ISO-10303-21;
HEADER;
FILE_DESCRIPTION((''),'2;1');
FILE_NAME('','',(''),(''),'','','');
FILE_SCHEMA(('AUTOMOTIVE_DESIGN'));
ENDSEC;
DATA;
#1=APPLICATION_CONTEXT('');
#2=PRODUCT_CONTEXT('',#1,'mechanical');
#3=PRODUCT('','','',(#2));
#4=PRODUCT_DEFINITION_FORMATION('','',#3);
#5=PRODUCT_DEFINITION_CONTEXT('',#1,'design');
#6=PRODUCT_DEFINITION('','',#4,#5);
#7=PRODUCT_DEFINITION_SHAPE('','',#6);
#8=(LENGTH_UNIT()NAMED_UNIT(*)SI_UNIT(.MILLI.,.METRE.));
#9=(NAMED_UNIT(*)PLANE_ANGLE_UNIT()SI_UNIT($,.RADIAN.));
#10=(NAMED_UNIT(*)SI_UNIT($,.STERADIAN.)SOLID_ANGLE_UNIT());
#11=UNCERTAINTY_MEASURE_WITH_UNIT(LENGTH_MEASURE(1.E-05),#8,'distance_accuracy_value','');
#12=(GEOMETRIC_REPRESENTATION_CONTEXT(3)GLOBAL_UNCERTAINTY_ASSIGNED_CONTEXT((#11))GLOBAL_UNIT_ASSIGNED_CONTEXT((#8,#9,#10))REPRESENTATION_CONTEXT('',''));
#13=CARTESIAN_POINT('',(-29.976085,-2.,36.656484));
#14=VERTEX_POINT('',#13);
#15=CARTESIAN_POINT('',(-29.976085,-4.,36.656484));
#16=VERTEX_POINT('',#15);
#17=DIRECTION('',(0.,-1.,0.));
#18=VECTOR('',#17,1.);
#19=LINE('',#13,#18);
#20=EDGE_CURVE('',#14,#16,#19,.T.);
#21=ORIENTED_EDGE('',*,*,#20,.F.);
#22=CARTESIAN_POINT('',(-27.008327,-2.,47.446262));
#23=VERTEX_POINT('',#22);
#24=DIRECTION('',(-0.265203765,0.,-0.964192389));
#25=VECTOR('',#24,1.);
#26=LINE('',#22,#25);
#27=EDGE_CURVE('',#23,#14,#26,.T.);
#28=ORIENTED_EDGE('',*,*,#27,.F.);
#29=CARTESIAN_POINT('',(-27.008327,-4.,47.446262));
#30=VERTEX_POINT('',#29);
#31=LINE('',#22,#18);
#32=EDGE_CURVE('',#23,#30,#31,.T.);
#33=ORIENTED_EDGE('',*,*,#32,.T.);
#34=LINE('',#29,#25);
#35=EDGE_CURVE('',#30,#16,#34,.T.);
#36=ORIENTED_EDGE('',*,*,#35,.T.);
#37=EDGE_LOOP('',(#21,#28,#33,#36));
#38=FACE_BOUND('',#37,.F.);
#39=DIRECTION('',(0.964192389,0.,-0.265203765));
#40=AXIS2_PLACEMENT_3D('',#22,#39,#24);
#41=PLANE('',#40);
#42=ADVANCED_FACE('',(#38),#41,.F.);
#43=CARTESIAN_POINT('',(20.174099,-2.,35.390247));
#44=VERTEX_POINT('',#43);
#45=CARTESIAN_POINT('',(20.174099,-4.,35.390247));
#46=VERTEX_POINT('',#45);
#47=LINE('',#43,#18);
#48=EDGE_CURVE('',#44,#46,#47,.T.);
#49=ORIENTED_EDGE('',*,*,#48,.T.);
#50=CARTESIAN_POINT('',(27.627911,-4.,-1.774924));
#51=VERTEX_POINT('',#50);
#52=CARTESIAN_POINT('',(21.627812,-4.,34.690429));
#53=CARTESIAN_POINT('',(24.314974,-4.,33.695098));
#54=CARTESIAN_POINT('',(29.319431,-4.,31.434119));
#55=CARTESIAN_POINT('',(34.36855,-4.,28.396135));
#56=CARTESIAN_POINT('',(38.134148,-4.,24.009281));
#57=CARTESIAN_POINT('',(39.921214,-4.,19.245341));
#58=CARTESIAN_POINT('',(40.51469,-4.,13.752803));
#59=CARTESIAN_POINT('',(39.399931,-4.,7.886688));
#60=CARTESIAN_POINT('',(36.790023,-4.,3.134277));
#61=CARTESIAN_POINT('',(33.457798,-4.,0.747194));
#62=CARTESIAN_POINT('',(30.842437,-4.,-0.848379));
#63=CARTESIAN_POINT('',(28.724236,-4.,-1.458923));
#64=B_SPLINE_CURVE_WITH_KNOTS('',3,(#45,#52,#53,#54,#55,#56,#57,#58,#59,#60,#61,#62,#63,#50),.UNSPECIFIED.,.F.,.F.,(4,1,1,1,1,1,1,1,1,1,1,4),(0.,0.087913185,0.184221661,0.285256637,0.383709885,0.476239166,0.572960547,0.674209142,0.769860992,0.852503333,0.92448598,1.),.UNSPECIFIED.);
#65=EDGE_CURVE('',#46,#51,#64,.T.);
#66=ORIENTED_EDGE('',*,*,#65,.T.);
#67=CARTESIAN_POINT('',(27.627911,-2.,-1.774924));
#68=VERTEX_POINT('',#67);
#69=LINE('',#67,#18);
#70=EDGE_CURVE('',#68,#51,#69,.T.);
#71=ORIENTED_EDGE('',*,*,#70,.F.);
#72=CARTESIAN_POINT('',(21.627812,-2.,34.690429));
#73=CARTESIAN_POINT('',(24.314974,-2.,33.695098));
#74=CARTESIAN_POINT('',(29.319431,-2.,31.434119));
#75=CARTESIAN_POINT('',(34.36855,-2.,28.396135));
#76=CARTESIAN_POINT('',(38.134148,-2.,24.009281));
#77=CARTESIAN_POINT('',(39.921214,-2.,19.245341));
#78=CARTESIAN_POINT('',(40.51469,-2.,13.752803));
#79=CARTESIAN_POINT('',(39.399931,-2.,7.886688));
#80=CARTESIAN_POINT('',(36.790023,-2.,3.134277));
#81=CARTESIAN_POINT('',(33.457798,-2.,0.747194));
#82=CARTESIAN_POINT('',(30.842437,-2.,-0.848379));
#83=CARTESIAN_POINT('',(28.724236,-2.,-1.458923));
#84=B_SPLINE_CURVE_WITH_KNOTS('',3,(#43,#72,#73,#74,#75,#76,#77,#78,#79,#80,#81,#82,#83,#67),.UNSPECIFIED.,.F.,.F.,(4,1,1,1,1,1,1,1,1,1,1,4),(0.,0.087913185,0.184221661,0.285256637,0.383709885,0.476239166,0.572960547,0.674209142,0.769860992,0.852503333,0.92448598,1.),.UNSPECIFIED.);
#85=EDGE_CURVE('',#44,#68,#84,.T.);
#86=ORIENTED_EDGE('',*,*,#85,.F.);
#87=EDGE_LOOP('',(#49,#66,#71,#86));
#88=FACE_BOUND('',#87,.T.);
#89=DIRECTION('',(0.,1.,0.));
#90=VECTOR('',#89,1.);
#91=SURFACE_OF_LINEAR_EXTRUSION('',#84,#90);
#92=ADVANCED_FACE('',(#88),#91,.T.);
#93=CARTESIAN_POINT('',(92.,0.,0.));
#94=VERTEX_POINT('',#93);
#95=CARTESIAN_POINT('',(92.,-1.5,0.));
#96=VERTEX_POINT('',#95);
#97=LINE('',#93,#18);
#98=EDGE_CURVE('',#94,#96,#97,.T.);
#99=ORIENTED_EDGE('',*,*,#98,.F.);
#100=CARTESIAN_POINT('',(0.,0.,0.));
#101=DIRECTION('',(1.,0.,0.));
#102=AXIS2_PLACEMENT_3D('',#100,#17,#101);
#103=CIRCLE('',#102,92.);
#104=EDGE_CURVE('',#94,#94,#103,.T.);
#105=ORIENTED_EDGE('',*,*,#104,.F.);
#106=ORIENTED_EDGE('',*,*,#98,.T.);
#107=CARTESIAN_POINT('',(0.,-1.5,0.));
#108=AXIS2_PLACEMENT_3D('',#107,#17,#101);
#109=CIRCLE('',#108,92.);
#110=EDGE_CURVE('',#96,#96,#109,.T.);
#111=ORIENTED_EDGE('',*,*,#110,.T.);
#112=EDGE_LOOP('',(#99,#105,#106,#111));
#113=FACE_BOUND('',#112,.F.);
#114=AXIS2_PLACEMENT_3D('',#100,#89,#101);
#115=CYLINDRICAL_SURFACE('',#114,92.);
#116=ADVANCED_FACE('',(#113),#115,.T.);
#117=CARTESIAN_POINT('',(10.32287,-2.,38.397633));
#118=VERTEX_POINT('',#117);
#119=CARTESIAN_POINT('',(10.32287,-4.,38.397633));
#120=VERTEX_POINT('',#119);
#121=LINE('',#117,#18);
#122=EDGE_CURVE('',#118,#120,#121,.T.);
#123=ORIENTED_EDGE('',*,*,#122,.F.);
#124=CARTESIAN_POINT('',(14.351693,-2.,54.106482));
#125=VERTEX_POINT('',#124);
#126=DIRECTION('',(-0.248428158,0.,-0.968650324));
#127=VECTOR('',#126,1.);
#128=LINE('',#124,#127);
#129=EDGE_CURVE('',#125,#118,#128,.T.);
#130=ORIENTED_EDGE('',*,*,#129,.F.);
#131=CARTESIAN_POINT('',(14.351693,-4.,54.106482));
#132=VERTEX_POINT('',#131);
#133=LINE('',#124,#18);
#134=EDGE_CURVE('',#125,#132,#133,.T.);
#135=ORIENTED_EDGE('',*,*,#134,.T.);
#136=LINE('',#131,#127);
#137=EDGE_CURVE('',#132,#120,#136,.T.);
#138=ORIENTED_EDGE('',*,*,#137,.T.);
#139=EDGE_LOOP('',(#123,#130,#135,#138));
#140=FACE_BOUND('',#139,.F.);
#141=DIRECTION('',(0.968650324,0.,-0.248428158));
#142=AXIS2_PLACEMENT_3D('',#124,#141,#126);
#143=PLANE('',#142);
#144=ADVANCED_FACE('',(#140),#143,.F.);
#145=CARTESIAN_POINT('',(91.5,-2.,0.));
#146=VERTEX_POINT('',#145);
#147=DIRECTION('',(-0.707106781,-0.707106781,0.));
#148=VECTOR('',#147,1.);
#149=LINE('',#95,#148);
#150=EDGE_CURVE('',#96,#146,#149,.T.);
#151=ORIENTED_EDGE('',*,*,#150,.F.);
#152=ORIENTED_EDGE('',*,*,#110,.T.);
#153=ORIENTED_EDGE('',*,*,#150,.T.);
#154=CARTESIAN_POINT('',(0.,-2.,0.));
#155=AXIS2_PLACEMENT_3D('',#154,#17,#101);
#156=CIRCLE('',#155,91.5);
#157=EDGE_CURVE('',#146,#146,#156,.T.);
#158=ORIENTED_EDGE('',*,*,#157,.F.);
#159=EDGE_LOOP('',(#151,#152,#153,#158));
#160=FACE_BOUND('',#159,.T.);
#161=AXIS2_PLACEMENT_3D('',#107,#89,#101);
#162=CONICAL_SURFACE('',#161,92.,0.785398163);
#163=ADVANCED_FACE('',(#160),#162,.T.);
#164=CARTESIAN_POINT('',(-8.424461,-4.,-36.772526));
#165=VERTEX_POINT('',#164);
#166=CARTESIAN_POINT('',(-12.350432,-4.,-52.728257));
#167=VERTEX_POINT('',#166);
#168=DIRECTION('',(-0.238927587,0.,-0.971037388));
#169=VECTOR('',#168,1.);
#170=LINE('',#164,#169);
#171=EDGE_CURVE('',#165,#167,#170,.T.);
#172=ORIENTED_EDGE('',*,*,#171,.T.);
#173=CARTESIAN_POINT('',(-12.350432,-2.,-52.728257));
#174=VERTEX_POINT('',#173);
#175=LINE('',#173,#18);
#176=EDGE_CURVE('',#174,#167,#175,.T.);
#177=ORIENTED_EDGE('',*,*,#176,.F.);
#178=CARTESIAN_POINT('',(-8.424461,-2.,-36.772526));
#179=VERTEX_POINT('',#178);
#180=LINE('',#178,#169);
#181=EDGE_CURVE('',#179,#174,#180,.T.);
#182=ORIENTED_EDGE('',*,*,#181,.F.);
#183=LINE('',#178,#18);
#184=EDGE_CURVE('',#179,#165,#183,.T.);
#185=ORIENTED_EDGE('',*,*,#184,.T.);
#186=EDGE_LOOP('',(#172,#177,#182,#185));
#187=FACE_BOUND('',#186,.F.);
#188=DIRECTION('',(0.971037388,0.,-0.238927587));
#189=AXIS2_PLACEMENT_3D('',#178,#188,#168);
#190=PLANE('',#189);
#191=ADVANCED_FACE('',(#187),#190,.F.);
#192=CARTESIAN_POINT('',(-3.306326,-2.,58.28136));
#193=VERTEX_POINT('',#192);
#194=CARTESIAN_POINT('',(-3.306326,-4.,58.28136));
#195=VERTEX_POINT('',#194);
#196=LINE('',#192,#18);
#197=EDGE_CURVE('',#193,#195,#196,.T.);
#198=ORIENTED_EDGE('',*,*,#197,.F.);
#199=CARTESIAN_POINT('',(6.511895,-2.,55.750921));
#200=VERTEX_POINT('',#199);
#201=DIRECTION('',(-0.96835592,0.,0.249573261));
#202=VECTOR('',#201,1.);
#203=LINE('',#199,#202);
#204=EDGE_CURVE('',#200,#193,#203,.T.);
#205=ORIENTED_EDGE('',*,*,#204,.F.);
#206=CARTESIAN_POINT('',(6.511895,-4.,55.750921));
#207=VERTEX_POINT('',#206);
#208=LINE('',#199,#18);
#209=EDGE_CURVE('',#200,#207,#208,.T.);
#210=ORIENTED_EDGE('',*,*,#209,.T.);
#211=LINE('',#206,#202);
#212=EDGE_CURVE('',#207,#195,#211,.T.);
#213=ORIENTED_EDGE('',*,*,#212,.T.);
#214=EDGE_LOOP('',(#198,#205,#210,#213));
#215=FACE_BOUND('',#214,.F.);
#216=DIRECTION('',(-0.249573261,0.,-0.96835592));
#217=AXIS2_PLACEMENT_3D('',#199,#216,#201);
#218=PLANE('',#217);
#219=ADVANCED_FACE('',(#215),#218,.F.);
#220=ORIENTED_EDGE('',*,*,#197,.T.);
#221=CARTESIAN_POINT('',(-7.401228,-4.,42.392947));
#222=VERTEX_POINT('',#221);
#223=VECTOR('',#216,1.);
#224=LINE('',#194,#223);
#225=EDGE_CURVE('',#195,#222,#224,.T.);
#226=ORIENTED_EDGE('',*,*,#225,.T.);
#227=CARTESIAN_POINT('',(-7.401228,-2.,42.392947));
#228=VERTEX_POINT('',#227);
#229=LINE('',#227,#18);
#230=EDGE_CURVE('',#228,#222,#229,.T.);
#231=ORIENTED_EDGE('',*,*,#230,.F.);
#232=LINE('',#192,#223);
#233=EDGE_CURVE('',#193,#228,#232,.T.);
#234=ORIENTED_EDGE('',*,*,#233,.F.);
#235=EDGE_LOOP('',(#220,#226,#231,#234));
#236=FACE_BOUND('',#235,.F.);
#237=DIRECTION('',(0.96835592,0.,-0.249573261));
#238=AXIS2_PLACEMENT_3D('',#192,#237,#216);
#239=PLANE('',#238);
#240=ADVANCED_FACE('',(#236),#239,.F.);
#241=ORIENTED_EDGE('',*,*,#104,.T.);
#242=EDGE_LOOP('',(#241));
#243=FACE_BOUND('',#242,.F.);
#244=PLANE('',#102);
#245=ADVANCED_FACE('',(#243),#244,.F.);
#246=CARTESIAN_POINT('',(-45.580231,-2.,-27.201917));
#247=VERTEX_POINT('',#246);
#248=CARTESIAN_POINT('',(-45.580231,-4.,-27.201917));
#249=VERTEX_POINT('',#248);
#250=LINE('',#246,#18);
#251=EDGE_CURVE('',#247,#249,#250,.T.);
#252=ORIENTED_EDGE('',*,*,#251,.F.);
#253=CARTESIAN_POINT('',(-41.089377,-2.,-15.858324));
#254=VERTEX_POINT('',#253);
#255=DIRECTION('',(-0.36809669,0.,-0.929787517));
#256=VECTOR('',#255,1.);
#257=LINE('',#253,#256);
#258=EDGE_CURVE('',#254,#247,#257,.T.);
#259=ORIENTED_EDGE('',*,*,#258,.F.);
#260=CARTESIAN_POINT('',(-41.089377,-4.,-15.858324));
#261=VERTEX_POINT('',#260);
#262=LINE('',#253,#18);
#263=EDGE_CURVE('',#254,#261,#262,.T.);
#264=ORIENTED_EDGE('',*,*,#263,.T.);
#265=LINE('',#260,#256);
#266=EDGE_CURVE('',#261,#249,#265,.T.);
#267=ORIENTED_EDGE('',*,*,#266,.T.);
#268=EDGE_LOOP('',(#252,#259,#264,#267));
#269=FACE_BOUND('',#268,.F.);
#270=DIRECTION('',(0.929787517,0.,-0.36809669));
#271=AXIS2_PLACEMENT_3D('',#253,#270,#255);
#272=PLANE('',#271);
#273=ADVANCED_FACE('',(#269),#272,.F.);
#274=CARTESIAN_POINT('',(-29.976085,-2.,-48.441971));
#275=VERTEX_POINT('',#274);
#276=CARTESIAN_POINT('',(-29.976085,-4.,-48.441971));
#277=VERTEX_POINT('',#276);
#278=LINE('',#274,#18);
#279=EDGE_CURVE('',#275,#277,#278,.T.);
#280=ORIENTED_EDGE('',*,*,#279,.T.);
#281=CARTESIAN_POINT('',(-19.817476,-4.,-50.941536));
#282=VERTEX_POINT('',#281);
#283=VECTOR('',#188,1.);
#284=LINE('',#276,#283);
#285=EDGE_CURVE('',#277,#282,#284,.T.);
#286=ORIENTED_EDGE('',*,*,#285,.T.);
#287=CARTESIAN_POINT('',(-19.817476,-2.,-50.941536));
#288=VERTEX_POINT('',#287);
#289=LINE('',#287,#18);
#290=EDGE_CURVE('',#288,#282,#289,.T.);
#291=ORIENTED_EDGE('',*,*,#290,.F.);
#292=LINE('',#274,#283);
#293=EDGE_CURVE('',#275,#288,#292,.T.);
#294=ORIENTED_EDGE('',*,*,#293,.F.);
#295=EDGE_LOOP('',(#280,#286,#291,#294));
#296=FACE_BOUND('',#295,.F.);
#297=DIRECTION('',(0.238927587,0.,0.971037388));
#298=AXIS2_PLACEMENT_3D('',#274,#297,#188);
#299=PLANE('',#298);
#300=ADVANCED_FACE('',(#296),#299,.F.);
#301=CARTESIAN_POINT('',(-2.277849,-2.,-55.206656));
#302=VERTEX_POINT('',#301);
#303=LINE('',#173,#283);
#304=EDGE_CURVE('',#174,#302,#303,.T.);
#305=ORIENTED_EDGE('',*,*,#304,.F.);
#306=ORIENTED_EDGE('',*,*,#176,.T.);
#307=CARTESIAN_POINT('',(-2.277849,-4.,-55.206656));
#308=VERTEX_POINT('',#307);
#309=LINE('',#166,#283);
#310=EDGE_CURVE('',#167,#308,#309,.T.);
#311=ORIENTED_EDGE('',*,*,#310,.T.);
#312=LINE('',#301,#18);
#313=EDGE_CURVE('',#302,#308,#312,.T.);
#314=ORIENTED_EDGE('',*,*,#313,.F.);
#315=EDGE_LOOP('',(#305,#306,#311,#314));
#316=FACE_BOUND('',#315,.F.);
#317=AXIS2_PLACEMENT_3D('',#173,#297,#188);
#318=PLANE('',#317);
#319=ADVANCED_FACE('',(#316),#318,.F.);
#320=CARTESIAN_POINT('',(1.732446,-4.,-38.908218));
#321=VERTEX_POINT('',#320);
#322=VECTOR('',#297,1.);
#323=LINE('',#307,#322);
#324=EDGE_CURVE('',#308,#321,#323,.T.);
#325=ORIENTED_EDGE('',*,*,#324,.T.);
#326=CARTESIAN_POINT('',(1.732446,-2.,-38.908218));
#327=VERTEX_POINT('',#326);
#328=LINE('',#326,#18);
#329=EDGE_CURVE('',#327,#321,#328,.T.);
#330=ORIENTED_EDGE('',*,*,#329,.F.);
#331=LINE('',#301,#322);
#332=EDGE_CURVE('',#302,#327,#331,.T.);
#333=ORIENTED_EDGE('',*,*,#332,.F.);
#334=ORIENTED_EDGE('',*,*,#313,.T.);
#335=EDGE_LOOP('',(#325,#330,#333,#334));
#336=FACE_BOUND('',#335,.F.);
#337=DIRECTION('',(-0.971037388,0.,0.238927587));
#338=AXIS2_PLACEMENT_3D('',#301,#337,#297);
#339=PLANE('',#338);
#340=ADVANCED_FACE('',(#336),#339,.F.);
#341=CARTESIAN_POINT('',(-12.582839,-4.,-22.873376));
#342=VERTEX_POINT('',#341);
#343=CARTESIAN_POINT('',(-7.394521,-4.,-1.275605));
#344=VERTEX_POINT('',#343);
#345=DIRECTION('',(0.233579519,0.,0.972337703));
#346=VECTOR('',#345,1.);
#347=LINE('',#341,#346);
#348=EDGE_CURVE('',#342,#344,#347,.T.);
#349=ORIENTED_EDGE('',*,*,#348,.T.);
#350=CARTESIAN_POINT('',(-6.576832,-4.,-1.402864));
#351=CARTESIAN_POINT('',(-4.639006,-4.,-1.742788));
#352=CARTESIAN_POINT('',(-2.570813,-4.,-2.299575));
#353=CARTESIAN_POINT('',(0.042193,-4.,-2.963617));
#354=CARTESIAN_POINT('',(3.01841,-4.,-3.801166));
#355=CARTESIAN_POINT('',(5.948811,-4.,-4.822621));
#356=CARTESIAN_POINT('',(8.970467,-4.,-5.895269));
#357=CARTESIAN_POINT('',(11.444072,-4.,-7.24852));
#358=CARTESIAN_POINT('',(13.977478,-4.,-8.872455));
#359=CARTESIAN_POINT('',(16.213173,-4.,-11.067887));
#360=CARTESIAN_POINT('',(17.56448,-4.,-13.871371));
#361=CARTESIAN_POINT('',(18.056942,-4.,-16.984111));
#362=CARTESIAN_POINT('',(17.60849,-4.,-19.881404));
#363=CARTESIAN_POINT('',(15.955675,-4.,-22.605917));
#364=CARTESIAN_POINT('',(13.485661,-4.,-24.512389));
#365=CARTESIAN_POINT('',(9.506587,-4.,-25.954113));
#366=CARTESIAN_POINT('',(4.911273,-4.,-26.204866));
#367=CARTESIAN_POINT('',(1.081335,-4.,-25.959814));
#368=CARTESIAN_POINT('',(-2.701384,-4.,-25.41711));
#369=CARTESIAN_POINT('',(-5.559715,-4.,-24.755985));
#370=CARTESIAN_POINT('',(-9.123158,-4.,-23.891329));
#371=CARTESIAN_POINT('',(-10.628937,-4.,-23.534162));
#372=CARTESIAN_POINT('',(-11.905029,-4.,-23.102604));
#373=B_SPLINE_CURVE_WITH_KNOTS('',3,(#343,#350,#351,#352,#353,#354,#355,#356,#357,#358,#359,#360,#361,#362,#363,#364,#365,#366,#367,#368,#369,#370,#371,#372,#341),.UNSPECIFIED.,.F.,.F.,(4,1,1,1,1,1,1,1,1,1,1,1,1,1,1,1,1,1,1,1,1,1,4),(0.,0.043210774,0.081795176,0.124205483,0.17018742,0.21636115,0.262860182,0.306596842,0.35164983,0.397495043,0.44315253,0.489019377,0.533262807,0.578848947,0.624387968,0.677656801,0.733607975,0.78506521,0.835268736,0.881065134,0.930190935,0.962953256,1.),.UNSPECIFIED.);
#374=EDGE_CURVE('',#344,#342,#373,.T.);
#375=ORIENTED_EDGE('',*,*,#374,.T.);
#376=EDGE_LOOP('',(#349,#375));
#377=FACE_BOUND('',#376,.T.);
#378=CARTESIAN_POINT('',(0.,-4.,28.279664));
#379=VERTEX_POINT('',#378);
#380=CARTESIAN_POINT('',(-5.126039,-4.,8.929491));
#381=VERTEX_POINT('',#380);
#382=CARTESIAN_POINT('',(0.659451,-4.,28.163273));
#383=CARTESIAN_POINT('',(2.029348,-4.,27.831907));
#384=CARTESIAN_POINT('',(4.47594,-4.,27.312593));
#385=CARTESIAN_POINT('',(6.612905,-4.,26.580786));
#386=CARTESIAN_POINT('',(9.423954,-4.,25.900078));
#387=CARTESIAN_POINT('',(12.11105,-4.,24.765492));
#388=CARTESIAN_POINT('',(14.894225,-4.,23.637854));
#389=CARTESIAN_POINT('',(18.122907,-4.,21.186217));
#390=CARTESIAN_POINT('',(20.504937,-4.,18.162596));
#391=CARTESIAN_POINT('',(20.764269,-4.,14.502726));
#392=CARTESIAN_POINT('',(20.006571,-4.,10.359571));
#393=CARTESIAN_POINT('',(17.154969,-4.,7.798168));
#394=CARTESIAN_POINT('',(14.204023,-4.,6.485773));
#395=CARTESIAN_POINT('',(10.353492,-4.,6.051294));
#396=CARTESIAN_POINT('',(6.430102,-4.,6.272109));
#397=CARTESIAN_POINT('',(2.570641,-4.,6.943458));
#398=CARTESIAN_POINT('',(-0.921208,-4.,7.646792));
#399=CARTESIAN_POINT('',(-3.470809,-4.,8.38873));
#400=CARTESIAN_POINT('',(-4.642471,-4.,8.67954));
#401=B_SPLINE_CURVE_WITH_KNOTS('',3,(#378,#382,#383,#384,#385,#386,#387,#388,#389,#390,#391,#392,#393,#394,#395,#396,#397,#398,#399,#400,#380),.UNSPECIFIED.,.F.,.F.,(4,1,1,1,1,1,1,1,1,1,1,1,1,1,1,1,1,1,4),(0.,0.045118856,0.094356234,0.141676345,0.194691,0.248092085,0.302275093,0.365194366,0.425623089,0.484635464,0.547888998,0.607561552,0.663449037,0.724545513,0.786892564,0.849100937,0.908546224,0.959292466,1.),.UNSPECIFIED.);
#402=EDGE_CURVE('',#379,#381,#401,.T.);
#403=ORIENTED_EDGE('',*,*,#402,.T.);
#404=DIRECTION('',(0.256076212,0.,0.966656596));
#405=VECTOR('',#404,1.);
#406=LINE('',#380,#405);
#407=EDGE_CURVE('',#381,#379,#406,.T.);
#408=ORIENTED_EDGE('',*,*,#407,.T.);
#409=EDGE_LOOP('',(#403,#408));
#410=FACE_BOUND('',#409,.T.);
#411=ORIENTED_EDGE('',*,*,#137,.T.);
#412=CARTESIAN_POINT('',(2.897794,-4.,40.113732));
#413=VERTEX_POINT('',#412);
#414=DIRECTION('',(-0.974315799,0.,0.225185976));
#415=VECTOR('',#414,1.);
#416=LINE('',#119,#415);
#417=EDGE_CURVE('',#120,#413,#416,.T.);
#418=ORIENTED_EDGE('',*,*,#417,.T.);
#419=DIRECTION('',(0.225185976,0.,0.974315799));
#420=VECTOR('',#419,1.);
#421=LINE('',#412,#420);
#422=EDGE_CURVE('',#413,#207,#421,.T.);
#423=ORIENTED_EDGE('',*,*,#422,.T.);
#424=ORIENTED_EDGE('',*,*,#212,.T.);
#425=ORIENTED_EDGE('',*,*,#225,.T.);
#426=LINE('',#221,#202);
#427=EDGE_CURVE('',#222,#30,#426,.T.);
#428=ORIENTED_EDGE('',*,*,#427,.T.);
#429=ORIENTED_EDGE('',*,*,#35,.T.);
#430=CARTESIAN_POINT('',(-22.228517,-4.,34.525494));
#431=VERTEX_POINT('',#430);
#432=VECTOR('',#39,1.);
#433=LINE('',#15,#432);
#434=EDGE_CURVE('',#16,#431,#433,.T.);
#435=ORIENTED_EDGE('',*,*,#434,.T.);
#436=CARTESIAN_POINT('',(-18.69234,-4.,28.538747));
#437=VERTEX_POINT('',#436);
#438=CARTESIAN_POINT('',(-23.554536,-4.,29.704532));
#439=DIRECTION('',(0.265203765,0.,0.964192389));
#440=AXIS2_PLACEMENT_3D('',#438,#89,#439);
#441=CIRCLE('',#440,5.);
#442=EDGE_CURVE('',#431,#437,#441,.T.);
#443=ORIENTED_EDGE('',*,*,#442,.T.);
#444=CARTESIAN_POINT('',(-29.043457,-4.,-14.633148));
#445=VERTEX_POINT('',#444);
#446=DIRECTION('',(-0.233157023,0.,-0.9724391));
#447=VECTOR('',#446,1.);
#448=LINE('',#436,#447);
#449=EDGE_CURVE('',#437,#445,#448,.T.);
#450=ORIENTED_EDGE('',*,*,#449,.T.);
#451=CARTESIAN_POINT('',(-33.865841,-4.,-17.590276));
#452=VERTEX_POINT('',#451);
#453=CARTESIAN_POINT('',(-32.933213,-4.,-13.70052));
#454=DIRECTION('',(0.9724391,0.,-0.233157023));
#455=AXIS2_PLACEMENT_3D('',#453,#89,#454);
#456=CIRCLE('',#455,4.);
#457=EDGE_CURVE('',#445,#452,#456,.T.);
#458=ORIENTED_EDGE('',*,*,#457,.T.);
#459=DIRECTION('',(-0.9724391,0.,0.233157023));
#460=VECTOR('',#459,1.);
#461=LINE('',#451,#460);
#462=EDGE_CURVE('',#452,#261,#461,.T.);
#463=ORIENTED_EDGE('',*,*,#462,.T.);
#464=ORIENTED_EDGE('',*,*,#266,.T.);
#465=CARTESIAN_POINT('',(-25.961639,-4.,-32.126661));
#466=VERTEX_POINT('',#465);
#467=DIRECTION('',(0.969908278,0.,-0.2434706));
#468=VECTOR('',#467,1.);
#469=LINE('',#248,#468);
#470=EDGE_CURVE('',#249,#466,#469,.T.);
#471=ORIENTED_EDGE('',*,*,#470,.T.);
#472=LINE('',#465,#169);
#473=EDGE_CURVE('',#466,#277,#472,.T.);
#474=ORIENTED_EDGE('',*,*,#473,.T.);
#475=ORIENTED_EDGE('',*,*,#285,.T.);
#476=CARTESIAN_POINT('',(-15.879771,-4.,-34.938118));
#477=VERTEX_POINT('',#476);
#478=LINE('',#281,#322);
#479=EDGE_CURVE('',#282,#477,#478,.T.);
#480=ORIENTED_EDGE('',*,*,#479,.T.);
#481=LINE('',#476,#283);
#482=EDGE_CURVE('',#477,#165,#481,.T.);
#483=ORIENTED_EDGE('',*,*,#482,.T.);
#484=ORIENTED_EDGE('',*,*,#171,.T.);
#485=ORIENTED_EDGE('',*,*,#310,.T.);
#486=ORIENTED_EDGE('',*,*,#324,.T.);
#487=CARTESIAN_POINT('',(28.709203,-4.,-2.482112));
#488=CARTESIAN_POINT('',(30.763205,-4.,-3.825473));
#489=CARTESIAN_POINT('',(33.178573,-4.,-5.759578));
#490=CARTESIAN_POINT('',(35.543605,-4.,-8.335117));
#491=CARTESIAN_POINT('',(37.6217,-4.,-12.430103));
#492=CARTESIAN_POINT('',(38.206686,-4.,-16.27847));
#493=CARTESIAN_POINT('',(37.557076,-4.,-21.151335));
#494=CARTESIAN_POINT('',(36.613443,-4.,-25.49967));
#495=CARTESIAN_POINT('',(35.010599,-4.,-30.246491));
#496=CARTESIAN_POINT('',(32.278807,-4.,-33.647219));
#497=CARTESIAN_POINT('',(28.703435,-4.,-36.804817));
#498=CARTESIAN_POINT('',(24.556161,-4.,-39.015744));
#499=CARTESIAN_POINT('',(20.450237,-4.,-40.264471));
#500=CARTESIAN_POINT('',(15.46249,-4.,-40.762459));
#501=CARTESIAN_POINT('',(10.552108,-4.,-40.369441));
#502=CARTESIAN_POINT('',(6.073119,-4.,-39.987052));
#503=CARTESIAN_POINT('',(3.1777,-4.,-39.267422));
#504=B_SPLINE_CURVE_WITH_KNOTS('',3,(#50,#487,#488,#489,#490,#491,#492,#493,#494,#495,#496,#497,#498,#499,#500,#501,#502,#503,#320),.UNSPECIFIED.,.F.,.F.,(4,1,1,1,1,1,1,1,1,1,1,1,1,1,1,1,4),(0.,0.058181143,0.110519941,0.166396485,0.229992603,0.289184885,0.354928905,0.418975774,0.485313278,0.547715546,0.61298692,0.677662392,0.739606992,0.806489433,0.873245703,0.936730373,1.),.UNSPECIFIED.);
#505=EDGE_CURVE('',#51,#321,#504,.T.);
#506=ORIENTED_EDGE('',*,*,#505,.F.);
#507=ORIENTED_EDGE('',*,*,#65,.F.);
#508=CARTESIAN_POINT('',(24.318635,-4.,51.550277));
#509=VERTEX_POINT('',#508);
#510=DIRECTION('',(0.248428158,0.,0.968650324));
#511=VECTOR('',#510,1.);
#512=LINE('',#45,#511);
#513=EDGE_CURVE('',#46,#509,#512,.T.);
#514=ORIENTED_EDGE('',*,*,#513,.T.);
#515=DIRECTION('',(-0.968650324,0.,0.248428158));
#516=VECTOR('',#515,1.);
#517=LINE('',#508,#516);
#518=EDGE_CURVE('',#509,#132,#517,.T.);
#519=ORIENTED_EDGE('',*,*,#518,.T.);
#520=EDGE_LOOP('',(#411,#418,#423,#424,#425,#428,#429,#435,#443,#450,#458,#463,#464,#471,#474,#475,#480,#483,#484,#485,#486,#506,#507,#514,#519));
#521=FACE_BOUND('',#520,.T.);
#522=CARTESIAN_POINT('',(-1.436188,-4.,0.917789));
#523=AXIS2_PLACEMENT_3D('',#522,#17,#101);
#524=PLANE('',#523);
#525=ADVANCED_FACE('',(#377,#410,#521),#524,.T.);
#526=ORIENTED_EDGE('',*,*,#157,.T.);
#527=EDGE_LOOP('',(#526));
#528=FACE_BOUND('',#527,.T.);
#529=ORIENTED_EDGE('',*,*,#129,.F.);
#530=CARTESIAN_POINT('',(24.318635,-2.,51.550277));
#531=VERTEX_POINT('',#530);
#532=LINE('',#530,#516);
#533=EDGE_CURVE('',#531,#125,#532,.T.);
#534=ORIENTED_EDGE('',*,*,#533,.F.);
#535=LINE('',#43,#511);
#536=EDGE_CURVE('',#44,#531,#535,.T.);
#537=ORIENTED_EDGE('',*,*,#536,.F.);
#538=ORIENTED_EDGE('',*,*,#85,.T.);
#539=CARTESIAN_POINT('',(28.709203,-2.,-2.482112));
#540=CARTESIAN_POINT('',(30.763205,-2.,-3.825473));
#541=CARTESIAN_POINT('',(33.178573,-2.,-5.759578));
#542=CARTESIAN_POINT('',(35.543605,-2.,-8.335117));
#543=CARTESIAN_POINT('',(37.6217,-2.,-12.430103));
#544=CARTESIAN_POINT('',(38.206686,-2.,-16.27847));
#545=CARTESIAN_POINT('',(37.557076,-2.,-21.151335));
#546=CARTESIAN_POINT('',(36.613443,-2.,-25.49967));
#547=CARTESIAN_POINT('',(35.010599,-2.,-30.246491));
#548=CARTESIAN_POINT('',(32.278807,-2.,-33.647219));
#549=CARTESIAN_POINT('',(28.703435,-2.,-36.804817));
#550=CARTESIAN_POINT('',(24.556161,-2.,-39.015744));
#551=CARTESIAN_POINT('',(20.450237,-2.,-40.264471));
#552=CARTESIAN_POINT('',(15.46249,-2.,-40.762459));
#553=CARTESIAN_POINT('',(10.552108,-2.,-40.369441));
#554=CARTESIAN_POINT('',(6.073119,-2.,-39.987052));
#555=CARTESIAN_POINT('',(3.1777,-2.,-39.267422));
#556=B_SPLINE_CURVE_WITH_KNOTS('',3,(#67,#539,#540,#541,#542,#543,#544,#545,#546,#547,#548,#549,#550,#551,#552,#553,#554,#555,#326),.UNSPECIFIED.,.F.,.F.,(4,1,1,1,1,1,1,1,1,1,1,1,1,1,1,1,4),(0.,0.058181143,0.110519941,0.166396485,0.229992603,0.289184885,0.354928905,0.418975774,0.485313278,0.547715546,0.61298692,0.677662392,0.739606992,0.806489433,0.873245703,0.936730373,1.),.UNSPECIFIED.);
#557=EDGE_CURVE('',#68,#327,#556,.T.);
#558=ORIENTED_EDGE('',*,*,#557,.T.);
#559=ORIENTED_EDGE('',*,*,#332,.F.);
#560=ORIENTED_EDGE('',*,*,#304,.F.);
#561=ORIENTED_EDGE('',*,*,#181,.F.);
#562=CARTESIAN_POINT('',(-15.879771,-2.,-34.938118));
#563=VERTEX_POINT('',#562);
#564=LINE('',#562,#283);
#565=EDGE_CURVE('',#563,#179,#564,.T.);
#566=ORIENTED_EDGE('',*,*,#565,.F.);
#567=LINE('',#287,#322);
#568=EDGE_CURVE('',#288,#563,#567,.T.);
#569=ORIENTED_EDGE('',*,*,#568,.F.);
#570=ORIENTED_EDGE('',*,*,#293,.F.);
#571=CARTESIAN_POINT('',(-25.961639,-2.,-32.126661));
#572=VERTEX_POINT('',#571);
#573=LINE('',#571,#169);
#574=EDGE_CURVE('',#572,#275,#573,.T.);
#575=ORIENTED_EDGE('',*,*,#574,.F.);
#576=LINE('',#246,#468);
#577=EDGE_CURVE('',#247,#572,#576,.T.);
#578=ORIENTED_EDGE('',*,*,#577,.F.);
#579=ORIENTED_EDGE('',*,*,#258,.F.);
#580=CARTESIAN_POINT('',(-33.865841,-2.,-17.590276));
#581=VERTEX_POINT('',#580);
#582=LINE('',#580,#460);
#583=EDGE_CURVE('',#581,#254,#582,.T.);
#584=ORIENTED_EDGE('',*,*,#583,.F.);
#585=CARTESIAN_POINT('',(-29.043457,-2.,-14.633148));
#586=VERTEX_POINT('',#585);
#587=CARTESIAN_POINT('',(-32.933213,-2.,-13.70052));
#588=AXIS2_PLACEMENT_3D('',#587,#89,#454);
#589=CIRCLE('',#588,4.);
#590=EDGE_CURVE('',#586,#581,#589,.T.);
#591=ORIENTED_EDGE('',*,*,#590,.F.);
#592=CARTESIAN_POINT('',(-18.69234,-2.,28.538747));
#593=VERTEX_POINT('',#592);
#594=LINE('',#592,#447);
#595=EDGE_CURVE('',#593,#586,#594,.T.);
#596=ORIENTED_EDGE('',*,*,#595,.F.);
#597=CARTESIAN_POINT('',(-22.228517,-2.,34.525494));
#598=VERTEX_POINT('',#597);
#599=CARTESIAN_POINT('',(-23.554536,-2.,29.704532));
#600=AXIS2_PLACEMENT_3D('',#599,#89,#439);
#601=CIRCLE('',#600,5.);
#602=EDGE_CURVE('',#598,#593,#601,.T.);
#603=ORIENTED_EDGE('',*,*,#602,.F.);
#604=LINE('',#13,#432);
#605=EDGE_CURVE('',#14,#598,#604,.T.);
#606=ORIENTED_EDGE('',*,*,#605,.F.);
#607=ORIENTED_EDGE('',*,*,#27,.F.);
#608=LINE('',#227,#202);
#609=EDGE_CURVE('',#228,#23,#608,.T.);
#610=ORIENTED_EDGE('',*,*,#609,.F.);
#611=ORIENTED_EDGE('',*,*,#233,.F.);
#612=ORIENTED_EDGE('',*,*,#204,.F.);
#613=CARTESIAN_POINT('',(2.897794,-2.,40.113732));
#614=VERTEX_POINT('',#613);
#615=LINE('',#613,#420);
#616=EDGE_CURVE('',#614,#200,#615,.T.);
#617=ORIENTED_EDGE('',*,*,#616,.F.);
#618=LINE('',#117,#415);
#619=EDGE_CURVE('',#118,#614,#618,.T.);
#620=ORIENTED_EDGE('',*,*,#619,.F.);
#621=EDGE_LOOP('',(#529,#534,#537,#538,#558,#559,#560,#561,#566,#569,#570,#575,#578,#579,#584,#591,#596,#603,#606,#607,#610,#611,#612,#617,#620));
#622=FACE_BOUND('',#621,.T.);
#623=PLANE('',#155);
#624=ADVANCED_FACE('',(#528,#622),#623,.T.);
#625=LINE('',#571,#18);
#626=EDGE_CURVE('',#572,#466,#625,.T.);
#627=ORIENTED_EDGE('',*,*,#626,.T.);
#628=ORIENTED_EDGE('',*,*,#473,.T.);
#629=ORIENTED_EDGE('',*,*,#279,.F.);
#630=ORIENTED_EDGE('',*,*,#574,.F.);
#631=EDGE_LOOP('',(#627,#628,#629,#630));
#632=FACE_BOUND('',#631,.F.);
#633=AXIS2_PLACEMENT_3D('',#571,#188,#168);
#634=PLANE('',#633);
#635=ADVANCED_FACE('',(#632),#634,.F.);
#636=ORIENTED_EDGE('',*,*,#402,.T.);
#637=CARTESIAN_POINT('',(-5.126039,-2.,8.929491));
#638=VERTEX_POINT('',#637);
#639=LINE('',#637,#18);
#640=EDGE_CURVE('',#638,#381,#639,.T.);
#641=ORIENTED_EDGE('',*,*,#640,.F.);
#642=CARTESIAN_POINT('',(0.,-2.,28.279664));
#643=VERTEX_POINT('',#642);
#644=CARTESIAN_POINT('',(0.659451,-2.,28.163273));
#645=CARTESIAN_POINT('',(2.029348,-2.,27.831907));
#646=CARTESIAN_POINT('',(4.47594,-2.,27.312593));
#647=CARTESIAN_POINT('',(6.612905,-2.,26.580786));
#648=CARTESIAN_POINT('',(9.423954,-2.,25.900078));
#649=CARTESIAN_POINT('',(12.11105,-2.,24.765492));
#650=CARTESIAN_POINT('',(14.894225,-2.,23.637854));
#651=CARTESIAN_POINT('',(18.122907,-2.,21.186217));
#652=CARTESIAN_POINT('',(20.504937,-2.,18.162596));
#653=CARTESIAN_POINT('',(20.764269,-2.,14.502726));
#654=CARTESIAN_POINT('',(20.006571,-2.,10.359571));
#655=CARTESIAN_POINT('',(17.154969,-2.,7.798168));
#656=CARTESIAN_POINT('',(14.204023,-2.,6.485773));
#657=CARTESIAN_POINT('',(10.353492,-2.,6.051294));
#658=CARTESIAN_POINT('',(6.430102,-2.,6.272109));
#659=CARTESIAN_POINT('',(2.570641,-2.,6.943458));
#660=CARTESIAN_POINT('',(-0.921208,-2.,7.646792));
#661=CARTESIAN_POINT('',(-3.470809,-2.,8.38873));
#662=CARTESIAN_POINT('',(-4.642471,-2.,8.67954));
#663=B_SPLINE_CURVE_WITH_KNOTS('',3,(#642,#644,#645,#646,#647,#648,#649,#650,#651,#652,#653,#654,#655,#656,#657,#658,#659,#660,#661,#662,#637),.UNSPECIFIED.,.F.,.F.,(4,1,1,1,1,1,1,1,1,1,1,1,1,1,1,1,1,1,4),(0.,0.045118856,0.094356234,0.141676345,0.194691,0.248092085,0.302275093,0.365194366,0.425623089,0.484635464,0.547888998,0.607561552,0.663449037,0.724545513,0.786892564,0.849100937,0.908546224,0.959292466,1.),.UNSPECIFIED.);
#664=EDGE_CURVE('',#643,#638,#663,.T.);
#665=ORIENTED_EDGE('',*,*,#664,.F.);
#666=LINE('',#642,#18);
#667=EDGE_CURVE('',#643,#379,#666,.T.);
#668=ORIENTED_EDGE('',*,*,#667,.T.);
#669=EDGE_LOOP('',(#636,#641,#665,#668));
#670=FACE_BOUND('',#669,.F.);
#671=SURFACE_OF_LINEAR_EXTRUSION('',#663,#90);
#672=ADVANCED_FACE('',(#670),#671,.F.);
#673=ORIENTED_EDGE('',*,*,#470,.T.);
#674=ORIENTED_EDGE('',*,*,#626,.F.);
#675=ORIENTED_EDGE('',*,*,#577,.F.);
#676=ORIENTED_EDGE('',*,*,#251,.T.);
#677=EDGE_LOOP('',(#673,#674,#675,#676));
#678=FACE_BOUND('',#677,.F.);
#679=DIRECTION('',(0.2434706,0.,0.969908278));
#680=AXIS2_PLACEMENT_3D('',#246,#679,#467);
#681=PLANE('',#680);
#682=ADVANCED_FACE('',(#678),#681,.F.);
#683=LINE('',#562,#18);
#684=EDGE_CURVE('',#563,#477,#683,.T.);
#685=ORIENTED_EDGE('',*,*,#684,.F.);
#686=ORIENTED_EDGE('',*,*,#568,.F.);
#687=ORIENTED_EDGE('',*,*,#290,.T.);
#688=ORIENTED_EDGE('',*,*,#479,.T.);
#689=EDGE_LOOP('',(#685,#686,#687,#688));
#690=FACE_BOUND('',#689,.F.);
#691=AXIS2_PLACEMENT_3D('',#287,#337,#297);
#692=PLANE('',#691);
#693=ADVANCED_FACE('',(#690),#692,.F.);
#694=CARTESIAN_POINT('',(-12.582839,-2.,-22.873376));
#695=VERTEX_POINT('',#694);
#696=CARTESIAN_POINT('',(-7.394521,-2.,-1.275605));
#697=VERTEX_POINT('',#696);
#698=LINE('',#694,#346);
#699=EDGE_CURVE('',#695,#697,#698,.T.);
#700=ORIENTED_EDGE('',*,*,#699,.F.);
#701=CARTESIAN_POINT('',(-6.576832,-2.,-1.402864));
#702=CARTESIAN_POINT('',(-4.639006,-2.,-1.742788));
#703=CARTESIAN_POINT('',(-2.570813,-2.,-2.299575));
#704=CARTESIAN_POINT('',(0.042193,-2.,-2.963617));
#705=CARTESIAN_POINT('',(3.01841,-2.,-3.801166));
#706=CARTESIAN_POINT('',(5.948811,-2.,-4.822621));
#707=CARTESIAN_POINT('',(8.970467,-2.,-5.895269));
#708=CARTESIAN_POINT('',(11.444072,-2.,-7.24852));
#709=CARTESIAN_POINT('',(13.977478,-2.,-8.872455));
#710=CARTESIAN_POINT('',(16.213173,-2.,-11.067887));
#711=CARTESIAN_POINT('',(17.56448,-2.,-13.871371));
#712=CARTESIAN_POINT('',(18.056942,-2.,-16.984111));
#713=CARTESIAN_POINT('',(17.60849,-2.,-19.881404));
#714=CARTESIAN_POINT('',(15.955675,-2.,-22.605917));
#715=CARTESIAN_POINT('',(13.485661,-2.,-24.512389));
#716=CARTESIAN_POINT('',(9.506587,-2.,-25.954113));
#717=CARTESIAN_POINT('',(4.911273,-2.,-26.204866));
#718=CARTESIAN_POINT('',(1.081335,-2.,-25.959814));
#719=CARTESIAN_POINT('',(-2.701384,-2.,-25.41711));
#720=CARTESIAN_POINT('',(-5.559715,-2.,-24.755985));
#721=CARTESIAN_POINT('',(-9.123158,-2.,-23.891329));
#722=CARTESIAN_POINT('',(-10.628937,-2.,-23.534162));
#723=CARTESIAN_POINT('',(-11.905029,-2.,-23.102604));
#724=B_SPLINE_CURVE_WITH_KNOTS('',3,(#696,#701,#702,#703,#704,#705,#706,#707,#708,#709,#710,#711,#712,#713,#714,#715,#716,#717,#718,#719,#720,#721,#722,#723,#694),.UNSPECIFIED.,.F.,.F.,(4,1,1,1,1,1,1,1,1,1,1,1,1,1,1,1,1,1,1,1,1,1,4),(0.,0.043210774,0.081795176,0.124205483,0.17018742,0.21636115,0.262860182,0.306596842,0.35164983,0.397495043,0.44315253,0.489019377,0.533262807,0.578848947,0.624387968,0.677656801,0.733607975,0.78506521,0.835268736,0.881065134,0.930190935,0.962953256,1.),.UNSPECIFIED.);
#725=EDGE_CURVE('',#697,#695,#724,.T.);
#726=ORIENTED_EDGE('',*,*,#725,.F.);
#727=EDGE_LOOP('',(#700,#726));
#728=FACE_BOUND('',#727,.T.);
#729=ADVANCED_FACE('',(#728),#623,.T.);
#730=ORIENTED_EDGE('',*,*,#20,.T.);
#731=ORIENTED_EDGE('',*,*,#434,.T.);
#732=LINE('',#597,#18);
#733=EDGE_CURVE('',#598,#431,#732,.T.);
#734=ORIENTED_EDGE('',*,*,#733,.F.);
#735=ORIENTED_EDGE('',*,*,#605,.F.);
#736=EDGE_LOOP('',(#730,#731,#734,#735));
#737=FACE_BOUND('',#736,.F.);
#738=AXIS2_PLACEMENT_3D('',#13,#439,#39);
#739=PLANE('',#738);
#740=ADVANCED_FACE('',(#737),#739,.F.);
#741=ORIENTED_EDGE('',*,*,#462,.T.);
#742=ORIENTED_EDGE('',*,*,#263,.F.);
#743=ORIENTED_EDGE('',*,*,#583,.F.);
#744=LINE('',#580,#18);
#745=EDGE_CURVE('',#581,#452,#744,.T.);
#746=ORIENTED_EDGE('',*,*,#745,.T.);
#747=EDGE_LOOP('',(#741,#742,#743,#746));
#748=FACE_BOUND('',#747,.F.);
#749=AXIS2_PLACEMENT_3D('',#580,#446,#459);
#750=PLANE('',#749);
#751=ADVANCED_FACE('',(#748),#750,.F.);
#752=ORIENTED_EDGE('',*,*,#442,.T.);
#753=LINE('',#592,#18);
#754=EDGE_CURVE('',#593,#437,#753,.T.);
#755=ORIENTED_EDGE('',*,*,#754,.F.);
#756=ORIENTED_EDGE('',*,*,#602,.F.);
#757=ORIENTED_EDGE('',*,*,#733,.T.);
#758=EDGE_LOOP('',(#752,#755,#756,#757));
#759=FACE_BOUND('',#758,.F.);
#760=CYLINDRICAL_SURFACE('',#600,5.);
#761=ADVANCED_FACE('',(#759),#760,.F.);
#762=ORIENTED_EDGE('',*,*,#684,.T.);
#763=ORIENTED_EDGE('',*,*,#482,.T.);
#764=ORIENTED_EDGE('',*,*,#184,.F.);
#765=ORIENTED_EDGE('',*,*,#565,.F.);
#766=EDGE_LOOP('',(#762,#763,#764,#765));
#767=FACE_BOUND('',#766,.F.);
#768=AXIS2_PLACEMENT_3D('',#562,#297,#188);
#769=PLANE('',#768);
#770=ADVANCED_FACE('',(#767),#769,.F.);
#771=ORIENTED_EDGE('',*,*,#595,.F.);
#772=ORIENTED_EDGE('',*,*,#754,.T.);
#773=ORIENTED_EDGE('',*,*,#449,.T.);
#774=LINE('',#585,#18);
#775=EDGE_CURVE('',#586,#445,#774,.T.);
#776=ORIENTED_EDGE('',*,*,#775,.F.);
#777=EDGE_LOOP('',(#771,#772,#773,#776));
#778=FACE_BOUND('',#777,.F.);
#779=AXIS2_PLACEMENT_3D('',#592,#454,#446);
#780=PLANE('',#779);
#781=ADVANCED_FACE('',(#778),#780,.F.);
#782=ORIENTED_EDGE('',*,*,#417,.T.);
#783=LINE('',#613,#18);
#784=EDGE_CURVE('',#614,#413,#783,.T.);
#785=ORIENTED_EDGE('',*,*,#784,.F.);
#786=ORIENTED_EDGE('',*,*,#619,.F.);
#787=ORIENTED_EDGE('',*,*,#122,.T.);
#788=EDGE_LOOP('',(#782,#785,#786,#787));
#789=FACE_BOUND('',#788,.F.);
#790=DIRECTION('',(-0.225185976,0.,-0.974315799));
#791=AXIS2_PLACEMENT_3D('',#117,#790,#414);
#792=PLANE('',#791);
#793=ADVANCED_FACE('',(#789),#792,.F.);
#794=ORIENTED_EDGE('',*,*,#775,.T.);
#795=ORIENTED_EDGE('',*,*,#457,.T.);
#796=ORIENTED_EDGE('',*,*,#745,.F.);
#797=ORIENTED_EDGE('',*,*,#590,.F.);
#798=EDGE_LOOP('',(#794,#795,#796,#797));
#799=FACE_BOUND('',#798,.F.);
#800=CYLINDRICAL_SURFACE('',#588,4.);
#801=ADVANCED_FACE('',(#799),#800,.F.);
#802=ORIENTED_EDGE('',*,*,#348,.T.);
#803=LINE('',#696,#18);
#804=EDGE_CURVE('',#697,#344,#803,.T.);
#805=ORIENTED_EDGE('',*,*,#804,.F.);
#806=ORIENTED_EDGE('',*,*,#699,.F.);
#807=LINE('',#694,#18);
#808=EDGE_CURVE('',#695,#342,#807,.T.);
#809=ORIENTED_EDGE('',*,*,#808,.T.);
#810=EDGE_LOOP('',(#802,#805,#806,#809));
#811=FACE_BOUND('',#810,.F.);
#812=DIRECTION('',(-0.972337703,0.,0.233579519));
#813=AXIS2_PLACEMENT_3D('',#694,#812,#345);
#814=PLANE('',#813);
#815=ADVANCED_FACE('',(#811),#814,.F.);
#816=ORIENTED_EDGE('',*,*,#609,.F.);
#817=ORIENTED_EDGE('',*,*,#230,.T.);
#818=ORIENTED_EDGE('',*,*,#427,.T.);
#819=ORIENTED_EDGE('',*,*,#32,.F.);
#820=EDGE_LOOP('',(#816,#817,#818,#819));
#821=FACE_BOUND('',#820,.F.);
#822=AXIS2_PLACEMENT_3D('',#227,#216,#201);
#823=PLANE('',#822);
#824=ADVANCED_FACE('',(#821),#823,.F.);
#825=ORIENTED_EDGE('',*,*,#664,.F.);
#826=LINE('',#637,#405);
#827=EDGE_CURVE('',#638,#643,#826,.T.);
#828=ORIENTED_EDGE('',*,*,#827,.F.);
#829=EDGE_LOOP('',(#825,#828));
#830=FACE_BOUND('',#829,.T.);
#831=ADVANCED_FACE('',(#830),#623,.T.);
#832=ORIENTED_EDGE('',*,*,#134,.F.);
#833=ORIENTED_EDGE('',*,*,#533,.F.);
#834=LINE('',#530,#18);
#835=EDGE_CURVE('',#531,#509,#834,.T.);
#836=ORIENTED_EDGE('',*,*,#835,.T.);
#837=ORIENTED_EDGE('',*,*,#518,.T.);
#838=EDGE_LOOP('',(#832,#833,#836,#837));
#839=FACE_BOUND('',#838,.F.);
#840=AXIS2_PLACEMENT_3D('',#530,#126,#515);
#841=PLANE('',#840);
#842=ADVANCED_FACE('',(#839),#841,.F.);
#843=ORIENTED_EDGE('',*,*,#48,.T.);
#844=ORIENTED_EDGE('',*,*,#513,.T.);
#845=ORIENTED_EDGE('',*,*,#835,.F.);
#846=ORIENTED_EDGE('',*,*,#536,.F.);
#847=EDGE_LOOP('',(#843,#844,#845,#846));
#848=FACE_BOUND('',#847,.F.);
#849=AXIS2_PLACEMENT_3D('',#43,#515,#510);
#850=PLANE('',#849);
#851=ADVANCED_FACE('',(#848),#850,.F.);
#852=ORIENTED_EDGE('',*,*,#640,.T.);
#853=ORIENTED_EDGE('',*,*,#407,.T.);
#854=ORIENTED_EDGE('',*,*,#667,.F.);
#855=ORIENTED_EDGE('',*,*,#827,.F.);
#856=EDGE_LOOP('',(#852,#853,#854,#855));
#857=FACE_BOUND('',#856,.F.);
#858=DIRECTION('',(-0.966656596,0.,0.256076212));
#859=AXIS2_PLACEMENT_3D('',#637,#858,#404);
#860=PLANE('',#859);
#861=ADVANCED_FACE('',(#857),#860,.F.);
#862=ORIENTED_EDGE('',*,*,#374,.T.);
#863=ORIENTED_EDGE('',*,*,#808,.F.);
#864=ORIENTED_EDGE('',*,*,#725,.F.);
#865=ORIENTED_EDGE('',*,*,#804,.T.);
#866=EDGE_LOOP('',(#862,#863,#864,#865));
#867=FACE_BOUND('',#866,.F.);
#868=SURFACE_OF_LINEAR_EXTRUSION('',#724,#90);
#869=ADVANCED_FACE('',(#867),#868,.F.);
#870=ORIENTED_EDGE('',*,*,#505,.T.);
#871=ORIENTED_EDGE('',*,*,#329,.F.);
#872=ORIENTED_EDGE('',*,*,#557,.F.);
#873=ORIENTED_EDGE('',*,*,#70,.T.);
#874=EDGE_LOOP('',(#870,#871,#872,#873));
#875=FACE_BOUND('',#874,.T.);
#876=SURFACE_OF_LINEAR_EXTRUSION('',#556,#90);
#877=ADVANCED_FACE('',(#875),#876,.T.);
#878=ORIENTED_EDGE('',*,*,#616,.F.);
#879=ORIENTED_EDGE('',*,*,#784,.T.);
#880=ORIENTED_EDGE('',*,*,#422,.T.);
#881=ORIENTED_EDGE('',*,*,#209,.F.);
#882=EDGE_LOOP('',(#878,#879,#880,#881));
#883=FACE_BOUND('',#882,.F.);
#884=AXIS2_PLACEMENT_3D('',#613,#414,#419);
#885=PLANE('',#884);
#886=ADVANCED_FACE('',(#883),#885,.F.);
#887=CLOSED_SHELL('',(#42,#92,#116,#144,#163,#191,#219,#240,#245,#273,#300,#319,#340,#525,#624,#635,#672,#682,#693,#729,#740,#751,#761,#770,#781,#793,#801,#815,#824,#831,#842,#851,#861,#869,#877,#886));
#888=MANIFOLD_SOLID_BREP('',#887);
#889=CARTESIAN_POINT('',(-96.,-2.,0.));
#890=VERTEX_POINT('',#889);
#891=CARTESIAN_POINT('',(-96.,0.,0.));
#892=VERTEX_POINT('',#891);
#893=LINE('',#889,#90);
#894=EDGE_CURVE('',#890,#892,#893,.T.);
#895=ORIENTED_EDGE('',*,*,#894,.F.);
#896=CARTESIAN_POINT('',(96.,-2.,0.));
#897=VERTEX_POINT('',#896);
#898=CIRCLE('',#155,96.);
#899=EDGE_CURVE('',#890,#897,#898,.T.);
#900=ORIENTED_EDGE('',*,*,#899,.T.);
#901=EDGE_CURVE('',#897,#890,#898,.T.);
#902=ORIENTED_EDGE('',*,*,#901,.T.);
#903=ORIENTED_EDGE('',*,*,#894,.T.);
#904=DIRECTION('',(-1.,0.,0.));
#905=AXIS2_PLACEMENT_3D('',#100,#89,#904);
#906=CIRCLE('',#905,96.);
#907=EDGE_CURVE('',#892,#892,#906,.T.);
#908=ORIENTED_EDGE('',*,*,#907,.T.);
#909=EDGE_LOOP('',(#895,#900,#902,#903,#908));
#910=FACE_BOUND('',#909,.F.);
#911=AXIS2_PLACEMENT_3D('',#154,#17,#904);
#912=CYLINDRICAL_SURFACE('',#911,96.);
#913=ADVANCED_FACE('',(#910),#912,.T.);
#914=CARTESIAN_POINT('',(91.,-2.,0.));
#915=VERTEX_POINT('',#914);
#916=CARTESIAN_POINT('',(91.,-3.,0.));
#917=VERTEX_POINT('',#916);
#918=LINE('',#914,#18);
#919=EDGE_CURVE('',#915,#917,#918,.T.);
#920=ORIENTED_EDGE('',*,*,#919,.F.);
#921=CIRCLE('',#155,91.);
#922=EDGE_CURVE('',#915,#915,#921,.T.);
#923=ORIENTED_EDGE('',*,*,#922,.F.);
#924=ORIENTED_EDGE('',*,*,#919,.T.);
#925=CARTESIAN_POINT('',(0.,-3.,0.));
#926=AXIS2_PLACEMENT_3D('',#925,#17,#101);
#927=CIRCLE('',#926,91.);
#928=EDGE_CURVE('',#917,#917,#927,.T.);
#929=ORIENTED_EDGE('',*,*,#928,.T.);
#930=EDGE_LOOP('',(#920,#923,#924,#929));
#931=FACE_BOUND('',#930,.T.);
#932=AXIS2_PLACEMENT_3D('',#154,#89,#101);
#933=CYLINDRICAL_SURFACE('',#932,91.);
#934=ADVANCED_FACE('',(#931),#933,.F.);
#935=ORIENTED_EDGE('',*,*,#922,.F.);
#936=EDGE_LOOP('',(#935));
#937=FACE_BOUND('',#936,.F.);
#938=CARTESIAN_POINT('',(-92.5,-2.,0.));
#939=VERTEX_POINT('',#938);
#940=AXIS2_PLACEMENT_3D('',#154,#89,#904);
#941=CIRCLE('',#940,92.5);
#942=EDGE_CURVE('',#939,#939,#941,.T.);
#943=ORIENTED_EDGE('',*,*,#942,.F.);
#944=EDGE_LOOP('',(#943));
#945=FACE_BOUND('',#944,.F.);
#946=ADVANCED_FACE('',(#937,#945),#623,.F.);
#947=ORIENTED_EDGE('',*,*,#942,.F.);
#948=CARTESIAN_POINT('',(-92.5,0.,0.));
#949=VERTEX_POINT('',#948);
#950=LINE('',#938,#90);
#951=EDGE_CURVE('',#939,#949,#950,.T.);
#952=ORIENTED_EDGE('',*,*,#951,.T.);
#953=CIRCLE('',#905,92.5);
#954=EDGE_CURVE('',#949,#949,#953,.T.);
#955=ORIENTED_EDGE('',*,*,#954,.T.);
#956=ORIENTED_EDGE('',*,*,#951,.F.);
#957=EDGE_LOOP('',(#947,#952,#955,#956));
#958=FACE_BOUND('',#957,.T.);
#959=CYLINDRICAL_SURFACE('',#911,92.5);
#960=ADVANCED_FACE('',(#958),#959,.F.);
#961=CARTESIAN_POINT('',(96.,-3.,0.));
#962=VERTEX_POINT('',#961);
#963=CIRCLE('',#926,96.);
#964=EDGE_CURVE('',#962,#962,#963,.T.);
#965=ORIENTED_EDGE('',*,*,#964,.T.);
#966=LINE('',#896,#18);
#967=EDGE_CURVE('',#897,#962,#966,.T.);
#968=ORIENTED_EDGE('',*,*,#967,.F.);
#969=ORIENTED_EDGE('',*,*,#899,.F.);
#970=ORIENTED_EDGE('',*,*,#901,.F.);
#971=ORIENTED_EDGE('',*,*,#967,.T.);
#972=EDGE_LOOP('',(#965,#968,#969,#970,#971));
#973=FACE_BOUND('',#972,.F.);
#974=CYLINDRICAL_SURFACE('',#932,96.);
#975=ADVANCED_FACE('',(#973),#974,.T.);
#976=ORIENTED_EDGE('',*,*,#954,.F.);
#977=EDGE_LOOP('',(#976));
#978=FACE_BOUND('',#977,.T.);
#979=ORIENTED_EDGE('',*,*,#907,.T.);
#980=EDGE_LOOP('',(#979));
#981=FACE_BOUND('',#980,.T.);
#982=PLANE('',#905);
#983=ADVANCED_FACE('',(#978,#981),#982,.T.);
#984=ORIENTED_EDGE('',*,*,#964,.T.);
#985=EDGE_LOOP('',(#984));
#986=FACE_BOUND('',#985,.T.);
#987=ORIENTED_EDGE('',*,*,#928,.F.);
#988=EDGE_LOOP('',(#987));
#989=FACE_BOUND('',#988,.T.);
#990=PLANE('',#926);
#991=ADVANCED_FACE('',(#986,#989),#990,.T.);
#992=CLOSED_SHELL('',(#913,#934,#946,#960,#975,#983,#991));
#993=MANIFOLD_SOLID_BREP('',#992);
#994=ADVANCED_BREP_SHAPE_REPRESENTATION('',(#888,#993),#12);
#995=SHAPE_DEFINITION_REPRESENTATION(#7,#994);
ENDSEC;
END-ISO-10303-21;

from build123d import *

# Parameters (mm, degrees)
F0_R     = 92
F1_DEPTH = 2
F3_DEPTH = 2
F4_SIZE  = 0.5
F5_R     = 96
F5_R_2   = 91
F6_DEPTH = 1
F7_R     = 96
F7_R_2   = 92.5
F8_DEPTH = 2


with BuildPart() as f1:
    # F0 (on Front) → F1 (new body)
    with BuildSketch(Plane.XZ):
        Circle(F0_R)
    extrude(amount=F1_DEPTH)

    # F2 (on face) → F3 (join)
    with BuildSketch(Plane.XZ.offset(2)):
        with BuildLine():
            Line((-27.0083267242, 47.4462620914), (-29.9760848284, 36.6564840078))
            Line((-29.9760848284, 36.6564840078), (-22.2285168536, 34.5254941518))
            ThreePointArc((-22.2285168536, 34.5254941518), (-19.2494475019, 32.2474077001), (-18.6923401828, 28.5387470903))
            Line((-18.6923401828, 28.5387470903), (-29.0434567348, -14.6331475965))
            ThreePointArc((-29.0434567348, -14.6331475965), (-30.842207656, -17.1104602787), (-33.8658412268, -17.5902759013))
            Line((-33.8658412268, -17.5902759013), (-41.0893774862, -15.8583235217))
            Line((-41.0893774862, -15.8583235217), (-45.5802306533, -27.2019170225))
            Line((-45.5802306533, -27.2019170225), (-25.9616385436, -32.1266614632))
            Line((-25.9616385436, -32.1266614632), (-29.9760848284, -48.441970569))
            Line((-29.9760848284, -48.441970569), (-19.817475765, -50.9415364766))
            Line((-19.817475765, -50.9415364766), (-15.8797713169, -34.9381176534))
            Line((-15.8797713169, -34.9381176534), (-8.4244611112, -36.7725261935))
            Line((-8.4244611112, -36.7725261935), (-12.3504317889, -52.7282572216))
            Line((-12.3504317889, -52.7282572216), (-2.2778489124, -55.2066560459))
            Line((-2.2778489124, -55.2066560459), (1.7324462003, -38.9082179233))
            add(Edge.make_bspline(
                [(27.6279114187, -1.7749243416), (28.7092025494, -2.4821118055), (30.7632053657, -3.8254734602), (33.1785734598, -5.7595776851), (35.5436051108, -8.3351168728), (37.6216996589, -12.4301034838), (38.2066856938, -16.2784704159), (37.5570764776, -21.1513349859), (36.6134428702, -25.4996695115), (35.0105992865, -30.2464913011), (32.2788072952, -33.64721937), (28.7034354961, -36.8048168389), (24.5561605745, -39.0157443509), (20.4502370232, -40.2644712402), (15.4624899933, -40.7624594383), (10.5521076326, -40.369441247), (6.0731193085, -39.9870515263), (3.1776998465, -39.2674221664), (1.7324462003, -38.9082179233)],
                knots=[0, 0, 0, 0, 0.0581811431, 0.1105199409, 0.166396485, 0.2299926025, 0.2891848852, 0.3549289053, 0.4189757736, 0.485313278, 0.5477155456, 0.6129869197, 0.6776623921, 0.7396069918, 0.8064894325, 0.8732457029, 0.9367303728, 1, 1, 1, 1], degree=3))
            add(Edge.make_bspline(
                [(20.1740991324, 35.3902466595), (21.6278121019, 34.6904285852), (24.3149738139, 33.6950984802), (29.3194313708, 31.4341194751), (34.3685495032, 28.396134608), (38.1341477981, 24.00928099), (39.9212139511, 19.2453405833), (40.5146903242, 13.7528029738), (39.3999313783, 7.8866877404), (36.7900227553, 3.1342771082), (33.4577982443, 0.7471944738), (30.842437236, -0.8483793153), (28.7242359185, -1.4589227998), (27.6279114187, -1.7749243416)],
                knots=[0, 0, 0, 0, 0.0879131849, 0.1842216609, 0.2852566372, 0.3837098851, 0.4762391657, 0.5729605468, 0.6742091416, 0.7698609916, 0.8525033329, 0.9244859802, 1, 1, 1, 1], degree=3))
            Line((20.1740991324, 35.3902466595), (24.3186354637, 51.5502765775))
            Line((24.3186354637, 51.5502765775), (14.3516925878, 54.1064820468))
            Line((14.3516925878, 54.1064820468), (10.3228697553, 38.3976325393))
            Line((10.3228697553, 38.3976325393), (2.8977939663, 40.1137321249))
            Line((2.8977939663, 40.1137321249), (6.511894986, 55.7509213686))
            Line((6.511894986, 55.7509213686), (-3.3063256055, 58.2813601075))
            Line((-3.3063256055, 58.2813601075), (-7.4012280942, 42.3929470361))
            Line((-7.4012280942, 42.3929470361), (-27.0083267242, 47.4462620914))
        make_face()
        with BuildLine():
            add(Edge.make_bspline(
                [(-7.3945214972, -1.2756045908), (-6.5768317056, -1.4028643234), (-4.63900586, -1.7427881734), (-2.57081296, -2.2995746446), (0.0421927128, -2.9636168954), (3.0184104723, -3.8011660264), (5.9488114617, -4.8226208543), (8.9704667551, -5.8952692635), (11.4440716652, -7.2485195874), (13.9774779434, -8.8724554322), (16.2131732777, -11.0678870183), (17.5644795402, -13.8713713722), (18.0569415504, -16.9841107708), (17.6084902929, -19.8814042944), (15.9556754656, -22.6059172587), (13.485660827, -24.5123892135), (9.5065873234, -25.9541132726), (4.911272628, -26.2048659523), (1.0813354306, -25.9598137418), (-2.7013841014, -25.417109761), (-5.5597148749, -24.7559847533), (-9.1231579206, -23.8913288849), (-10.6289368032, -23.5341618733), (-11.9050285979, -23.1026036338), (-12.5828394666, -22.8733764961)],
                knots=[0, 0, 0, 0, 0.0432107736, 0.0817951762, 0.1242054829, 0.1701874201, 0.2163611502, 0.2628601821, 0.3065968424, 0.3516498299, 0.3974950427, 0.44315253, 0.489019377, 0.5332628071, 0.5788489469, 0.6243879684, 0.6776568014, 0.7336079752, 0.7850652102, 0.8352687365, 0.881065134, 0.9301909347, 0.9629532558, 1, 1, 1, 1], degree=3))
            Line((-12.5828394666, -22.8733764961), (-7.3945214972, -1.2756045908))
        make_face(mode=Mode.SUBTRACT)
        with BuildLine():
            add(Edge.make_bspline(
                [(0, 28.2796639949), (0.6594507111, 28.1632733619), (2.0293480465, 27.8319072156), (4.4759400475, 27.312592786), (6.6129046687, 26.5807861519), (9.423953844, 25.9000782009), (12.1110497434, 24.7654919402), (14.8942249223, 23.6378539674), (18.1229068592, 21.1862173413), (20.5049371095, 18.1625957982), (20.7642688452, 14.5027255358), (20.0065708946, 10.3595714781), (17.154968946, 7.7981675266), (14.2040228218, 6.4857733605), (10.3534918094, 6.0512943472), (6.4301023642, 6.2721085581), (2.5706409463, 6.9434579896), (-0.9212078817, 7.6467920997), (-3.4708089675, 8.3887302885), (-4.6424710337, 8.6795403272), (-5.1260385662, 8.9294910431)],
                knots=[0, 0, 0, 0, 0.0451188564, 0.094356234, 0.1416763455, 0.194691, 0.2480920849, 0.3022750925, 0.3651943655, 0.4256230889, 0.4846354637, 0.547888998, 0.6075615518, 0.6634490372, 0.7245455133, 0.7868925643, 0.8491009373, 0.9085462245, 0.9592924665, 1, 1, 1, 1], degree=3))
            Line((-5.1260385662, 8.9294910431), (0, 28.2796639949))
        make_face(mode=Mode.SUBTRACT)
    extrude(amount=F3_DEPTH)

    # F4
    f4_edges = [f1.edges().sort_by_distance(p)[0] for p in [
        (-92, -2, 0),
    ]]
    chamfer(f4_edges, length=F4_SIZE)


with BuildPart() as f6:
    # F5 (on face) → F6 (new body)
    with BuildSketch(Plane.XZ.offset(2)):
        Circle(F5_R)
        Circle(F5_R_2, mode=Mode.SUBTRACT)
    extrude(amount=F6_DEPTH)

    # F7 (on face) → F8 (join)
    with BuildSketch(Plane(origin=(0, -2, 0), x_dir=(-1, 0, 0), z_dir=(0, 1, 0))):
        Circle(F7_R)
        Circle(F7_R_2, mode=Mode.SUBTRACT)
    extrude(amount=F8_DEPTH)


solid = Compound([f1.part, f6.part])
